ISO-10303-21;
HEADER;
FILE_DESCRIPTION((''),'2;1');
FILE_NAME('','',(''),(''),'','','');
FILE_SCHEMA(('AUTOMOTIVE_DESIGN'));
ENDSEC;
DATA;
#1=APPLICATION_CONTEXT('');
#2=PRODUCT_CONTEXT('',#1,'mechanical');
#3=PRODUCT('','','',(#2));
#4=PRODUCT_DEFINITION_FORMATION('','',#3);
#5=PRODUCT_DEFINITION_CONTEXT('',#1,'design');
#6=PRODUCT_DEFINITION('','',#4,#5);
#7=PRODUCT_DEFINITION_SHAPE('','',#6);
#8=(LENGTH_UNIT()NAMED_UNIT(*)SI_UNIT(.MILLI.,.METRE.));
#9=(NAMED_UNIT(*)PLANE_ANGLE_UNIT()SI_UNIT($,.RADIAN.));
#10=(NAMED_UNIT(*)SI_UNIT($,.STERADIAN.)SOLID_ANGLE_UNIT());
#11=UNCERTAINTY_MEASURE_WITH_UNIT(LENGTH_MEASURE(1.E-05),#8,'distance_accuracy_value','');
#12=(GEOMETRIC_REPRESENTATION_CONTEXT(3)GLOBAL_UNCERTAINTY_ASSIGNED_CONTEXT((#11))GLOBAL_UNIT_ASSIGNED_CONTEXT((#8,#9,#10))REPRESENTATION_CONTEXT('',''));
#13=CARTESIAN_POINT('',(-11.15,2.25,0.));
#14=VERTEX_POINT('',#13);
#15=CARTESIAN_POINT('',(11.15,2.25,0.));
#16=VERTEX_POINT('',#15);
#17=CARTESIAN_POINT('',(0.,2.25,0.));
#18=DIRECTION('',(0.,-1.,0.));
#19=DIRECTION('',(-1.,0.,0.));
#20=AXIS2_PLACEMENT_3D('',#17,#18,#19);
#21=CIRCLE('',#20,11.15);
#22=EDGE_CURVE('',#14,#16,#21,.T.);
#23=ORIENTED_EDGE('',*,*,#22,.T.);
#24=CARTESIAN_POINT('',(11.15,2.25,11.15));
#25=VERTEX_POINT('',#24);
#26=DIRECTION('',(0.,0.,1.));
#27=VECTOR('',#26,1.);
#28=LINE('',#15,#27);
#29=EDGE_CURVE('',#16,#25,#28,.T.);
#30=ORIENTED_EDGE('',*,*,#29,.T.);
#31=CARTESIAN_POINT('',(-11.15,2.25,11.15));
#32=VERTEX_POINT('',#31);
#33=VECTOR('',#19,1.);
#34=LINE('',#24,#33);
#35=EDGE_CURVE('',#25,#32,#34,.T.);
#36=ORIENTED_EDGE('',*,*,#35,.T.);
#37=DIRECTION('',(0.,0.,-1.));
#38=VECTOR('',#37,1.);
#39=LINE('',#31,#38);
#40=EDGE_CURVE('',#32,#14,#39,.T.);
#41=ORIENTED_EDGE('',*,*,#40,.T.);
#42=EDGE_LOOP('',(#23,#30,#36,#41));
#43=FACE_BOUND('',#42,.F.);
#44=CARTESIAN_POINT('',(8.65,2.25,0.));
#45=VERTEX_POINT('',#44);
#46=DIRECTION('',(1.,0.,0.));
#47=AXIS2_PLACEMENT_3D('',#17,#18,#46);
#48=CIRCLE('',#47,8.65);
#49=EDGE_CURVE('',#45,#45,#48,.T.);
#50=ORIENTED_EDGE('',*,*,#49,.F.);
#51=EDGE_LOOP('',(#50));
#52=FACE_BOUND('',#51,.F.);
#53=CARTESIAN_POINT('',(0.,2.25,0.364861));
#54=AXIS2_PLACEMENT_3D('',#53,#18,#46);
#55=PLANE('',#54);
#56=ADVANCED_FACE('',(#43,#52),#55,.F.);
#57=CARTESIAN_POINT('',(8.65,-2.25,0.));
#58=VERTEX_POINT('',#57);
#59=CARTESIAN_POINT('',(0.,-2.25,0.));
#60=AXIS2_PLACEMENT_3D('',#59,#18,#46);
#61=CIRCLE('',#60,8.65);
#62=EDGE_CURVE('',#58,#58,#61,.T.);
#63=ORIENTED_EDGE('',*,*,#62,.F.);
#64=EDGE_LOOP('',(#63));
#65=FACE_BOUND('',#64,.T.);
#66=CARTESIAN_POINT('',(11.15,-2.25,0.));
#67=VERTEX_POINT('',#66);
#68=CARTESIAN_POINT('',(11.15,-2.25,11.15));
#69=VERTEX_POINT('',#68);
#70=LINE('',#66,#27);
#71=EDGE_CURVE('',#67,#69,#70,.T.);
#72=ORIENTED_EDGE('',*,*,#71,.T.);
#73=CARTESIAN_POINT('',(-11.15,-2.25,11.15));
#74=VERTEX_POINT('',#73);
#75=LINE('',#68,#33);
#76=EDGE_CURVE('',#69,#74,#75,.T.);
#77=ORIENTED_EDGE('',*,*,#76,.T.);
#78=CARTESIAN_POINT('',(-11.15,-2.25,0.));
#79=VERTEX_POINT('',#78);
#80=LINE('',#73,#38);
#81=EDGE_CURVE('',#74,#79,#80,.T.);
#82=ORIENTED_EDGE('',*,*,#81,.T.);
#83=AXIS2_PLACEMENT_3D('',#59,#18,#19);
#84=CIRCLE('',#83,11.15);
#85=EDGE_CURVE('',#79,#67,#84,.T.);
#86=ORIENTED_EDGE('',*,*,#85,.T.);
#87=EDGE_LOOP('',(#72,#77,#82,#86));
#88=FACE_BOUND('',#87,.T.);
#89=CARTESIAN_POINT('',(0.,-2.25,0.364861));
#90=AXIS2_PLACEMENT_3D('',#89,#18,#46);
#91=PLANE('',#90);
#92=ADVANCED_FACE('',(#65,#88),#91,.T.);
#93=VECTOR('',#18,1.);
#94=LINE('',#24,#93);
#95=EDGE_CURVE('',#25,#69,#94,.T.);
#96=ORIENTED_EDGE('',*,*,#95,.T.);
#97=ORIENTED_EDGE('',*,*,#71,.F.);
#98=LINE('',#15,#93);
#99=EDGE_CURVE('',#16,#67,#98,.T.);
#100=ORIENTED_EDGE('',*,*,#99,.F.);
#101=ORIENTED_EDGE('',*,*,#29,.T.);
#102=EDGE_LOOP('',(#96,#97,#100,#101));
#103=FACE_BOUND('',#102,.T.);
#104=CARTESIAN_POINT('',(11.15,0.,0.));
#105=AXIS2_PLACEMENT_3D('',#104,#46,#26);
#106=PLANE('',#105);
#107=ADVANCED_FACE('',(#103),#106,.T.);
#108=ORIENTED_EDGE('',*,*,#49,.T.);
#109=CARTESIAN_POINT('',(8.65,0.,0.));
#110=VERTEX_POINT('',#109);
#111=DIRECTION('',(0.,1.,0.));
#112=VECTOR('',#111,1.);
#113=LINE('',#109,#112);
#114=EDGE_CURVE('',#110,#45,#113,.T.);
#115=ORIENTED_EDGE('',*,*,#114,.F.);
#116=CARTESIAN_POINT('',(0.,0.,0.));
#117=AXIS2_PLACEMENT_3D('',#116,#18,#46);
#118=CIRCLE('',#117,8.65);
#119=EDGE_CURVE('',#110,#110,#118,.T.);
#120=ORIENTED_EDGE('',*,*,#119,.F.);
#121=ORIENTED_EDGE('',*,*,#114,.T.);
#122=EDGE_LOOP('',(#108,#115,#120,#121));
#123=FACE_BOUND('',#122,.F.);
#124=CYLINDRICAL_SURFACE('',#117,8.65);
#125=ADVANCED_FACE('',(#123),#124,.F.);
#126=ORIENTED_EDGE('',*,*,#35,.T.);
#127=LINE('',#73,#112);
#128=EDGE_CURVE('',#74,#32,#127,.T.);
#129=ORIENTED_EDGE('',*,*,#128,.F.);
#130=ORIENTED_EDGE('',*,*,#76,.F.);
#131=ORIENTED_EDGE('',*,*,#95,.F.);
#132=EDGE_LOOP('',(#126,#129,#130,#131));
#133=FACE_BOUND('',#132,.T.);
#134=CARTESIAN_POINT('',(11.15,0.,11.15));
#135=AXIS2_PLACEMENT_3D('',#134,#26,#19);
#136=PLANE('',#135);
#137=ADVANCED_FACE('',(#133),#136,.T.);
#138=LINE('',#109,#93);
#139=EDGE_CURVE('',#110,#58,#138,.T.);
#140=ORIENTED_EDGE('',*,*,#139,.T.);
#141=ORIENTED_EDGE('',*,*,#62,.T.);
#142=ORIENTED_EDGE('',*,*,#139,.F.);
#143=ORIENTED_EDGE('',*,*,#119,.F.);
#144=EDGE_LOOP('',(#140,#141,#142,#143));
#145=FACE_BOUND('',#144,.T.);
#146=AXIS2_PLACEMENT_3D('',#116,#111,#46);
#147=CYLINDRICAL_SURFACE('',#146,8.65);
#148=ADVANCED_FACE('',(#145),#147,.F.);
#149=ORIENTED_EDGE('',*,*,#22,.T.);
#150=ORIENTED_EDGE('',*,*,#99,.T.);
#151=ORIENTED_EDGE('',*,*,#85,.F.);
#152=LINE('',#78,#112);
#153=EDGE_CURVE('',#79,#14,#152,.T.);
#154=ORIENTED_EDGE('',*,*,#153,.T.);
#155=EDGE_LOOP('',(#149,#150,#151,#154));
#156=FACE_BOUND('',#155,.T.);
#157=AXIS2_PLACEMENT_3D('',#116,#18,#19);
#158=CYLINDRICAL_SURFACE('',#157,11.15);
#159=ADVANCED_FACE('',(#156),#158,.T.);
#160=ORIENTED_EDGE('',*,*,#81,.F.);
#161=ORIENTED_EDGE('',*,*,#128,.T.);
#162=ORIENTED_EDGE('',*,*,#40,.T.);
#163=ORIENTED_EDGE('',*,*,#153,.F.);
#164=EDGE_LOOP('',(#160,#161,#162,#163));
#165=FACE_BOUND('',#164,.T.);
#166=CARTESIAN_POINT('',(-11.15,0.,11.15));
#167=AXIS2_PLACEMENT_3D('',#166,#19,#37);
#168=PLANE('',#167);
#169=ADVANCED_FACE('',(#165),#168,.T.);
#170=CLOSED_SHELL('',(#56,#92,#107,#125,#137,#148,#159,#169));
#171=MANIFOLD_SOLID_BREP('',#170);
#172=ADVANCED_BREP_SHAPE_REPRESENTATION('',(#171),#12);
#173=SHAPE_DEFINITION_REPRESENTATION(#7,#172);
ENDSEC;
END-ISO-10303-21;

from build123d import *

# Parameters (mm, degrees)
F0_R          = 8.65
F1_DEPTH      = 2.25
F1_DEPTH_BACK = 2.25


# Not quite as in the source:
# - the program builds the solid bodies; features that only make, move or delete a surface that nothing else refers to are left out


with BuildPart() as f1:
    # F0 (on Front) → F1 (new body, two sides)
    with BuildSketch(Plane.XZ) as f1_sk:
        with BuildLine():
            ThreePointArc((-11.15, 0), (0, -11.15), (11.15, 0))
            ThreePointArc((11.15, 0), (7.8842406102, 7.8842406102), (0, 11.15))
            ThreePointArc((0, 11.15), (-7.8842406102, 7.8842406102), (-11.15, 0))
        make_face()
        Circle(F0_R, mode=Mode.SUBTRACT)
        with BuildLine():
            ThreePointArc((-11.15, 0), (-7.8842406102, 7.8842406102), (0, 11.15))
            Line((0, 11.15), (-4, 11.15))
            Line((-4, 11.15), (-9.15, 11.15))
            Line((-9.15, 11.15), (-11.15, 11.15))
            Line((-11.15, 11.15), (-11.15, 0))
        make_face()
        with BuildLine():
            ThreePointArc((0, 11.15), (7.8842406102, 7.8842406102), (11.15, 0))
            Line((11.15, 0), (11.15, 11.15))
            Line((11.15, 11.15), (0, 11.15))
        make_face()
    extrude(amount=F1_DEPTH)
    extrude(f1_sk.sketch, amount=-F1_DEPTH_BACK)


solid = f1.part
